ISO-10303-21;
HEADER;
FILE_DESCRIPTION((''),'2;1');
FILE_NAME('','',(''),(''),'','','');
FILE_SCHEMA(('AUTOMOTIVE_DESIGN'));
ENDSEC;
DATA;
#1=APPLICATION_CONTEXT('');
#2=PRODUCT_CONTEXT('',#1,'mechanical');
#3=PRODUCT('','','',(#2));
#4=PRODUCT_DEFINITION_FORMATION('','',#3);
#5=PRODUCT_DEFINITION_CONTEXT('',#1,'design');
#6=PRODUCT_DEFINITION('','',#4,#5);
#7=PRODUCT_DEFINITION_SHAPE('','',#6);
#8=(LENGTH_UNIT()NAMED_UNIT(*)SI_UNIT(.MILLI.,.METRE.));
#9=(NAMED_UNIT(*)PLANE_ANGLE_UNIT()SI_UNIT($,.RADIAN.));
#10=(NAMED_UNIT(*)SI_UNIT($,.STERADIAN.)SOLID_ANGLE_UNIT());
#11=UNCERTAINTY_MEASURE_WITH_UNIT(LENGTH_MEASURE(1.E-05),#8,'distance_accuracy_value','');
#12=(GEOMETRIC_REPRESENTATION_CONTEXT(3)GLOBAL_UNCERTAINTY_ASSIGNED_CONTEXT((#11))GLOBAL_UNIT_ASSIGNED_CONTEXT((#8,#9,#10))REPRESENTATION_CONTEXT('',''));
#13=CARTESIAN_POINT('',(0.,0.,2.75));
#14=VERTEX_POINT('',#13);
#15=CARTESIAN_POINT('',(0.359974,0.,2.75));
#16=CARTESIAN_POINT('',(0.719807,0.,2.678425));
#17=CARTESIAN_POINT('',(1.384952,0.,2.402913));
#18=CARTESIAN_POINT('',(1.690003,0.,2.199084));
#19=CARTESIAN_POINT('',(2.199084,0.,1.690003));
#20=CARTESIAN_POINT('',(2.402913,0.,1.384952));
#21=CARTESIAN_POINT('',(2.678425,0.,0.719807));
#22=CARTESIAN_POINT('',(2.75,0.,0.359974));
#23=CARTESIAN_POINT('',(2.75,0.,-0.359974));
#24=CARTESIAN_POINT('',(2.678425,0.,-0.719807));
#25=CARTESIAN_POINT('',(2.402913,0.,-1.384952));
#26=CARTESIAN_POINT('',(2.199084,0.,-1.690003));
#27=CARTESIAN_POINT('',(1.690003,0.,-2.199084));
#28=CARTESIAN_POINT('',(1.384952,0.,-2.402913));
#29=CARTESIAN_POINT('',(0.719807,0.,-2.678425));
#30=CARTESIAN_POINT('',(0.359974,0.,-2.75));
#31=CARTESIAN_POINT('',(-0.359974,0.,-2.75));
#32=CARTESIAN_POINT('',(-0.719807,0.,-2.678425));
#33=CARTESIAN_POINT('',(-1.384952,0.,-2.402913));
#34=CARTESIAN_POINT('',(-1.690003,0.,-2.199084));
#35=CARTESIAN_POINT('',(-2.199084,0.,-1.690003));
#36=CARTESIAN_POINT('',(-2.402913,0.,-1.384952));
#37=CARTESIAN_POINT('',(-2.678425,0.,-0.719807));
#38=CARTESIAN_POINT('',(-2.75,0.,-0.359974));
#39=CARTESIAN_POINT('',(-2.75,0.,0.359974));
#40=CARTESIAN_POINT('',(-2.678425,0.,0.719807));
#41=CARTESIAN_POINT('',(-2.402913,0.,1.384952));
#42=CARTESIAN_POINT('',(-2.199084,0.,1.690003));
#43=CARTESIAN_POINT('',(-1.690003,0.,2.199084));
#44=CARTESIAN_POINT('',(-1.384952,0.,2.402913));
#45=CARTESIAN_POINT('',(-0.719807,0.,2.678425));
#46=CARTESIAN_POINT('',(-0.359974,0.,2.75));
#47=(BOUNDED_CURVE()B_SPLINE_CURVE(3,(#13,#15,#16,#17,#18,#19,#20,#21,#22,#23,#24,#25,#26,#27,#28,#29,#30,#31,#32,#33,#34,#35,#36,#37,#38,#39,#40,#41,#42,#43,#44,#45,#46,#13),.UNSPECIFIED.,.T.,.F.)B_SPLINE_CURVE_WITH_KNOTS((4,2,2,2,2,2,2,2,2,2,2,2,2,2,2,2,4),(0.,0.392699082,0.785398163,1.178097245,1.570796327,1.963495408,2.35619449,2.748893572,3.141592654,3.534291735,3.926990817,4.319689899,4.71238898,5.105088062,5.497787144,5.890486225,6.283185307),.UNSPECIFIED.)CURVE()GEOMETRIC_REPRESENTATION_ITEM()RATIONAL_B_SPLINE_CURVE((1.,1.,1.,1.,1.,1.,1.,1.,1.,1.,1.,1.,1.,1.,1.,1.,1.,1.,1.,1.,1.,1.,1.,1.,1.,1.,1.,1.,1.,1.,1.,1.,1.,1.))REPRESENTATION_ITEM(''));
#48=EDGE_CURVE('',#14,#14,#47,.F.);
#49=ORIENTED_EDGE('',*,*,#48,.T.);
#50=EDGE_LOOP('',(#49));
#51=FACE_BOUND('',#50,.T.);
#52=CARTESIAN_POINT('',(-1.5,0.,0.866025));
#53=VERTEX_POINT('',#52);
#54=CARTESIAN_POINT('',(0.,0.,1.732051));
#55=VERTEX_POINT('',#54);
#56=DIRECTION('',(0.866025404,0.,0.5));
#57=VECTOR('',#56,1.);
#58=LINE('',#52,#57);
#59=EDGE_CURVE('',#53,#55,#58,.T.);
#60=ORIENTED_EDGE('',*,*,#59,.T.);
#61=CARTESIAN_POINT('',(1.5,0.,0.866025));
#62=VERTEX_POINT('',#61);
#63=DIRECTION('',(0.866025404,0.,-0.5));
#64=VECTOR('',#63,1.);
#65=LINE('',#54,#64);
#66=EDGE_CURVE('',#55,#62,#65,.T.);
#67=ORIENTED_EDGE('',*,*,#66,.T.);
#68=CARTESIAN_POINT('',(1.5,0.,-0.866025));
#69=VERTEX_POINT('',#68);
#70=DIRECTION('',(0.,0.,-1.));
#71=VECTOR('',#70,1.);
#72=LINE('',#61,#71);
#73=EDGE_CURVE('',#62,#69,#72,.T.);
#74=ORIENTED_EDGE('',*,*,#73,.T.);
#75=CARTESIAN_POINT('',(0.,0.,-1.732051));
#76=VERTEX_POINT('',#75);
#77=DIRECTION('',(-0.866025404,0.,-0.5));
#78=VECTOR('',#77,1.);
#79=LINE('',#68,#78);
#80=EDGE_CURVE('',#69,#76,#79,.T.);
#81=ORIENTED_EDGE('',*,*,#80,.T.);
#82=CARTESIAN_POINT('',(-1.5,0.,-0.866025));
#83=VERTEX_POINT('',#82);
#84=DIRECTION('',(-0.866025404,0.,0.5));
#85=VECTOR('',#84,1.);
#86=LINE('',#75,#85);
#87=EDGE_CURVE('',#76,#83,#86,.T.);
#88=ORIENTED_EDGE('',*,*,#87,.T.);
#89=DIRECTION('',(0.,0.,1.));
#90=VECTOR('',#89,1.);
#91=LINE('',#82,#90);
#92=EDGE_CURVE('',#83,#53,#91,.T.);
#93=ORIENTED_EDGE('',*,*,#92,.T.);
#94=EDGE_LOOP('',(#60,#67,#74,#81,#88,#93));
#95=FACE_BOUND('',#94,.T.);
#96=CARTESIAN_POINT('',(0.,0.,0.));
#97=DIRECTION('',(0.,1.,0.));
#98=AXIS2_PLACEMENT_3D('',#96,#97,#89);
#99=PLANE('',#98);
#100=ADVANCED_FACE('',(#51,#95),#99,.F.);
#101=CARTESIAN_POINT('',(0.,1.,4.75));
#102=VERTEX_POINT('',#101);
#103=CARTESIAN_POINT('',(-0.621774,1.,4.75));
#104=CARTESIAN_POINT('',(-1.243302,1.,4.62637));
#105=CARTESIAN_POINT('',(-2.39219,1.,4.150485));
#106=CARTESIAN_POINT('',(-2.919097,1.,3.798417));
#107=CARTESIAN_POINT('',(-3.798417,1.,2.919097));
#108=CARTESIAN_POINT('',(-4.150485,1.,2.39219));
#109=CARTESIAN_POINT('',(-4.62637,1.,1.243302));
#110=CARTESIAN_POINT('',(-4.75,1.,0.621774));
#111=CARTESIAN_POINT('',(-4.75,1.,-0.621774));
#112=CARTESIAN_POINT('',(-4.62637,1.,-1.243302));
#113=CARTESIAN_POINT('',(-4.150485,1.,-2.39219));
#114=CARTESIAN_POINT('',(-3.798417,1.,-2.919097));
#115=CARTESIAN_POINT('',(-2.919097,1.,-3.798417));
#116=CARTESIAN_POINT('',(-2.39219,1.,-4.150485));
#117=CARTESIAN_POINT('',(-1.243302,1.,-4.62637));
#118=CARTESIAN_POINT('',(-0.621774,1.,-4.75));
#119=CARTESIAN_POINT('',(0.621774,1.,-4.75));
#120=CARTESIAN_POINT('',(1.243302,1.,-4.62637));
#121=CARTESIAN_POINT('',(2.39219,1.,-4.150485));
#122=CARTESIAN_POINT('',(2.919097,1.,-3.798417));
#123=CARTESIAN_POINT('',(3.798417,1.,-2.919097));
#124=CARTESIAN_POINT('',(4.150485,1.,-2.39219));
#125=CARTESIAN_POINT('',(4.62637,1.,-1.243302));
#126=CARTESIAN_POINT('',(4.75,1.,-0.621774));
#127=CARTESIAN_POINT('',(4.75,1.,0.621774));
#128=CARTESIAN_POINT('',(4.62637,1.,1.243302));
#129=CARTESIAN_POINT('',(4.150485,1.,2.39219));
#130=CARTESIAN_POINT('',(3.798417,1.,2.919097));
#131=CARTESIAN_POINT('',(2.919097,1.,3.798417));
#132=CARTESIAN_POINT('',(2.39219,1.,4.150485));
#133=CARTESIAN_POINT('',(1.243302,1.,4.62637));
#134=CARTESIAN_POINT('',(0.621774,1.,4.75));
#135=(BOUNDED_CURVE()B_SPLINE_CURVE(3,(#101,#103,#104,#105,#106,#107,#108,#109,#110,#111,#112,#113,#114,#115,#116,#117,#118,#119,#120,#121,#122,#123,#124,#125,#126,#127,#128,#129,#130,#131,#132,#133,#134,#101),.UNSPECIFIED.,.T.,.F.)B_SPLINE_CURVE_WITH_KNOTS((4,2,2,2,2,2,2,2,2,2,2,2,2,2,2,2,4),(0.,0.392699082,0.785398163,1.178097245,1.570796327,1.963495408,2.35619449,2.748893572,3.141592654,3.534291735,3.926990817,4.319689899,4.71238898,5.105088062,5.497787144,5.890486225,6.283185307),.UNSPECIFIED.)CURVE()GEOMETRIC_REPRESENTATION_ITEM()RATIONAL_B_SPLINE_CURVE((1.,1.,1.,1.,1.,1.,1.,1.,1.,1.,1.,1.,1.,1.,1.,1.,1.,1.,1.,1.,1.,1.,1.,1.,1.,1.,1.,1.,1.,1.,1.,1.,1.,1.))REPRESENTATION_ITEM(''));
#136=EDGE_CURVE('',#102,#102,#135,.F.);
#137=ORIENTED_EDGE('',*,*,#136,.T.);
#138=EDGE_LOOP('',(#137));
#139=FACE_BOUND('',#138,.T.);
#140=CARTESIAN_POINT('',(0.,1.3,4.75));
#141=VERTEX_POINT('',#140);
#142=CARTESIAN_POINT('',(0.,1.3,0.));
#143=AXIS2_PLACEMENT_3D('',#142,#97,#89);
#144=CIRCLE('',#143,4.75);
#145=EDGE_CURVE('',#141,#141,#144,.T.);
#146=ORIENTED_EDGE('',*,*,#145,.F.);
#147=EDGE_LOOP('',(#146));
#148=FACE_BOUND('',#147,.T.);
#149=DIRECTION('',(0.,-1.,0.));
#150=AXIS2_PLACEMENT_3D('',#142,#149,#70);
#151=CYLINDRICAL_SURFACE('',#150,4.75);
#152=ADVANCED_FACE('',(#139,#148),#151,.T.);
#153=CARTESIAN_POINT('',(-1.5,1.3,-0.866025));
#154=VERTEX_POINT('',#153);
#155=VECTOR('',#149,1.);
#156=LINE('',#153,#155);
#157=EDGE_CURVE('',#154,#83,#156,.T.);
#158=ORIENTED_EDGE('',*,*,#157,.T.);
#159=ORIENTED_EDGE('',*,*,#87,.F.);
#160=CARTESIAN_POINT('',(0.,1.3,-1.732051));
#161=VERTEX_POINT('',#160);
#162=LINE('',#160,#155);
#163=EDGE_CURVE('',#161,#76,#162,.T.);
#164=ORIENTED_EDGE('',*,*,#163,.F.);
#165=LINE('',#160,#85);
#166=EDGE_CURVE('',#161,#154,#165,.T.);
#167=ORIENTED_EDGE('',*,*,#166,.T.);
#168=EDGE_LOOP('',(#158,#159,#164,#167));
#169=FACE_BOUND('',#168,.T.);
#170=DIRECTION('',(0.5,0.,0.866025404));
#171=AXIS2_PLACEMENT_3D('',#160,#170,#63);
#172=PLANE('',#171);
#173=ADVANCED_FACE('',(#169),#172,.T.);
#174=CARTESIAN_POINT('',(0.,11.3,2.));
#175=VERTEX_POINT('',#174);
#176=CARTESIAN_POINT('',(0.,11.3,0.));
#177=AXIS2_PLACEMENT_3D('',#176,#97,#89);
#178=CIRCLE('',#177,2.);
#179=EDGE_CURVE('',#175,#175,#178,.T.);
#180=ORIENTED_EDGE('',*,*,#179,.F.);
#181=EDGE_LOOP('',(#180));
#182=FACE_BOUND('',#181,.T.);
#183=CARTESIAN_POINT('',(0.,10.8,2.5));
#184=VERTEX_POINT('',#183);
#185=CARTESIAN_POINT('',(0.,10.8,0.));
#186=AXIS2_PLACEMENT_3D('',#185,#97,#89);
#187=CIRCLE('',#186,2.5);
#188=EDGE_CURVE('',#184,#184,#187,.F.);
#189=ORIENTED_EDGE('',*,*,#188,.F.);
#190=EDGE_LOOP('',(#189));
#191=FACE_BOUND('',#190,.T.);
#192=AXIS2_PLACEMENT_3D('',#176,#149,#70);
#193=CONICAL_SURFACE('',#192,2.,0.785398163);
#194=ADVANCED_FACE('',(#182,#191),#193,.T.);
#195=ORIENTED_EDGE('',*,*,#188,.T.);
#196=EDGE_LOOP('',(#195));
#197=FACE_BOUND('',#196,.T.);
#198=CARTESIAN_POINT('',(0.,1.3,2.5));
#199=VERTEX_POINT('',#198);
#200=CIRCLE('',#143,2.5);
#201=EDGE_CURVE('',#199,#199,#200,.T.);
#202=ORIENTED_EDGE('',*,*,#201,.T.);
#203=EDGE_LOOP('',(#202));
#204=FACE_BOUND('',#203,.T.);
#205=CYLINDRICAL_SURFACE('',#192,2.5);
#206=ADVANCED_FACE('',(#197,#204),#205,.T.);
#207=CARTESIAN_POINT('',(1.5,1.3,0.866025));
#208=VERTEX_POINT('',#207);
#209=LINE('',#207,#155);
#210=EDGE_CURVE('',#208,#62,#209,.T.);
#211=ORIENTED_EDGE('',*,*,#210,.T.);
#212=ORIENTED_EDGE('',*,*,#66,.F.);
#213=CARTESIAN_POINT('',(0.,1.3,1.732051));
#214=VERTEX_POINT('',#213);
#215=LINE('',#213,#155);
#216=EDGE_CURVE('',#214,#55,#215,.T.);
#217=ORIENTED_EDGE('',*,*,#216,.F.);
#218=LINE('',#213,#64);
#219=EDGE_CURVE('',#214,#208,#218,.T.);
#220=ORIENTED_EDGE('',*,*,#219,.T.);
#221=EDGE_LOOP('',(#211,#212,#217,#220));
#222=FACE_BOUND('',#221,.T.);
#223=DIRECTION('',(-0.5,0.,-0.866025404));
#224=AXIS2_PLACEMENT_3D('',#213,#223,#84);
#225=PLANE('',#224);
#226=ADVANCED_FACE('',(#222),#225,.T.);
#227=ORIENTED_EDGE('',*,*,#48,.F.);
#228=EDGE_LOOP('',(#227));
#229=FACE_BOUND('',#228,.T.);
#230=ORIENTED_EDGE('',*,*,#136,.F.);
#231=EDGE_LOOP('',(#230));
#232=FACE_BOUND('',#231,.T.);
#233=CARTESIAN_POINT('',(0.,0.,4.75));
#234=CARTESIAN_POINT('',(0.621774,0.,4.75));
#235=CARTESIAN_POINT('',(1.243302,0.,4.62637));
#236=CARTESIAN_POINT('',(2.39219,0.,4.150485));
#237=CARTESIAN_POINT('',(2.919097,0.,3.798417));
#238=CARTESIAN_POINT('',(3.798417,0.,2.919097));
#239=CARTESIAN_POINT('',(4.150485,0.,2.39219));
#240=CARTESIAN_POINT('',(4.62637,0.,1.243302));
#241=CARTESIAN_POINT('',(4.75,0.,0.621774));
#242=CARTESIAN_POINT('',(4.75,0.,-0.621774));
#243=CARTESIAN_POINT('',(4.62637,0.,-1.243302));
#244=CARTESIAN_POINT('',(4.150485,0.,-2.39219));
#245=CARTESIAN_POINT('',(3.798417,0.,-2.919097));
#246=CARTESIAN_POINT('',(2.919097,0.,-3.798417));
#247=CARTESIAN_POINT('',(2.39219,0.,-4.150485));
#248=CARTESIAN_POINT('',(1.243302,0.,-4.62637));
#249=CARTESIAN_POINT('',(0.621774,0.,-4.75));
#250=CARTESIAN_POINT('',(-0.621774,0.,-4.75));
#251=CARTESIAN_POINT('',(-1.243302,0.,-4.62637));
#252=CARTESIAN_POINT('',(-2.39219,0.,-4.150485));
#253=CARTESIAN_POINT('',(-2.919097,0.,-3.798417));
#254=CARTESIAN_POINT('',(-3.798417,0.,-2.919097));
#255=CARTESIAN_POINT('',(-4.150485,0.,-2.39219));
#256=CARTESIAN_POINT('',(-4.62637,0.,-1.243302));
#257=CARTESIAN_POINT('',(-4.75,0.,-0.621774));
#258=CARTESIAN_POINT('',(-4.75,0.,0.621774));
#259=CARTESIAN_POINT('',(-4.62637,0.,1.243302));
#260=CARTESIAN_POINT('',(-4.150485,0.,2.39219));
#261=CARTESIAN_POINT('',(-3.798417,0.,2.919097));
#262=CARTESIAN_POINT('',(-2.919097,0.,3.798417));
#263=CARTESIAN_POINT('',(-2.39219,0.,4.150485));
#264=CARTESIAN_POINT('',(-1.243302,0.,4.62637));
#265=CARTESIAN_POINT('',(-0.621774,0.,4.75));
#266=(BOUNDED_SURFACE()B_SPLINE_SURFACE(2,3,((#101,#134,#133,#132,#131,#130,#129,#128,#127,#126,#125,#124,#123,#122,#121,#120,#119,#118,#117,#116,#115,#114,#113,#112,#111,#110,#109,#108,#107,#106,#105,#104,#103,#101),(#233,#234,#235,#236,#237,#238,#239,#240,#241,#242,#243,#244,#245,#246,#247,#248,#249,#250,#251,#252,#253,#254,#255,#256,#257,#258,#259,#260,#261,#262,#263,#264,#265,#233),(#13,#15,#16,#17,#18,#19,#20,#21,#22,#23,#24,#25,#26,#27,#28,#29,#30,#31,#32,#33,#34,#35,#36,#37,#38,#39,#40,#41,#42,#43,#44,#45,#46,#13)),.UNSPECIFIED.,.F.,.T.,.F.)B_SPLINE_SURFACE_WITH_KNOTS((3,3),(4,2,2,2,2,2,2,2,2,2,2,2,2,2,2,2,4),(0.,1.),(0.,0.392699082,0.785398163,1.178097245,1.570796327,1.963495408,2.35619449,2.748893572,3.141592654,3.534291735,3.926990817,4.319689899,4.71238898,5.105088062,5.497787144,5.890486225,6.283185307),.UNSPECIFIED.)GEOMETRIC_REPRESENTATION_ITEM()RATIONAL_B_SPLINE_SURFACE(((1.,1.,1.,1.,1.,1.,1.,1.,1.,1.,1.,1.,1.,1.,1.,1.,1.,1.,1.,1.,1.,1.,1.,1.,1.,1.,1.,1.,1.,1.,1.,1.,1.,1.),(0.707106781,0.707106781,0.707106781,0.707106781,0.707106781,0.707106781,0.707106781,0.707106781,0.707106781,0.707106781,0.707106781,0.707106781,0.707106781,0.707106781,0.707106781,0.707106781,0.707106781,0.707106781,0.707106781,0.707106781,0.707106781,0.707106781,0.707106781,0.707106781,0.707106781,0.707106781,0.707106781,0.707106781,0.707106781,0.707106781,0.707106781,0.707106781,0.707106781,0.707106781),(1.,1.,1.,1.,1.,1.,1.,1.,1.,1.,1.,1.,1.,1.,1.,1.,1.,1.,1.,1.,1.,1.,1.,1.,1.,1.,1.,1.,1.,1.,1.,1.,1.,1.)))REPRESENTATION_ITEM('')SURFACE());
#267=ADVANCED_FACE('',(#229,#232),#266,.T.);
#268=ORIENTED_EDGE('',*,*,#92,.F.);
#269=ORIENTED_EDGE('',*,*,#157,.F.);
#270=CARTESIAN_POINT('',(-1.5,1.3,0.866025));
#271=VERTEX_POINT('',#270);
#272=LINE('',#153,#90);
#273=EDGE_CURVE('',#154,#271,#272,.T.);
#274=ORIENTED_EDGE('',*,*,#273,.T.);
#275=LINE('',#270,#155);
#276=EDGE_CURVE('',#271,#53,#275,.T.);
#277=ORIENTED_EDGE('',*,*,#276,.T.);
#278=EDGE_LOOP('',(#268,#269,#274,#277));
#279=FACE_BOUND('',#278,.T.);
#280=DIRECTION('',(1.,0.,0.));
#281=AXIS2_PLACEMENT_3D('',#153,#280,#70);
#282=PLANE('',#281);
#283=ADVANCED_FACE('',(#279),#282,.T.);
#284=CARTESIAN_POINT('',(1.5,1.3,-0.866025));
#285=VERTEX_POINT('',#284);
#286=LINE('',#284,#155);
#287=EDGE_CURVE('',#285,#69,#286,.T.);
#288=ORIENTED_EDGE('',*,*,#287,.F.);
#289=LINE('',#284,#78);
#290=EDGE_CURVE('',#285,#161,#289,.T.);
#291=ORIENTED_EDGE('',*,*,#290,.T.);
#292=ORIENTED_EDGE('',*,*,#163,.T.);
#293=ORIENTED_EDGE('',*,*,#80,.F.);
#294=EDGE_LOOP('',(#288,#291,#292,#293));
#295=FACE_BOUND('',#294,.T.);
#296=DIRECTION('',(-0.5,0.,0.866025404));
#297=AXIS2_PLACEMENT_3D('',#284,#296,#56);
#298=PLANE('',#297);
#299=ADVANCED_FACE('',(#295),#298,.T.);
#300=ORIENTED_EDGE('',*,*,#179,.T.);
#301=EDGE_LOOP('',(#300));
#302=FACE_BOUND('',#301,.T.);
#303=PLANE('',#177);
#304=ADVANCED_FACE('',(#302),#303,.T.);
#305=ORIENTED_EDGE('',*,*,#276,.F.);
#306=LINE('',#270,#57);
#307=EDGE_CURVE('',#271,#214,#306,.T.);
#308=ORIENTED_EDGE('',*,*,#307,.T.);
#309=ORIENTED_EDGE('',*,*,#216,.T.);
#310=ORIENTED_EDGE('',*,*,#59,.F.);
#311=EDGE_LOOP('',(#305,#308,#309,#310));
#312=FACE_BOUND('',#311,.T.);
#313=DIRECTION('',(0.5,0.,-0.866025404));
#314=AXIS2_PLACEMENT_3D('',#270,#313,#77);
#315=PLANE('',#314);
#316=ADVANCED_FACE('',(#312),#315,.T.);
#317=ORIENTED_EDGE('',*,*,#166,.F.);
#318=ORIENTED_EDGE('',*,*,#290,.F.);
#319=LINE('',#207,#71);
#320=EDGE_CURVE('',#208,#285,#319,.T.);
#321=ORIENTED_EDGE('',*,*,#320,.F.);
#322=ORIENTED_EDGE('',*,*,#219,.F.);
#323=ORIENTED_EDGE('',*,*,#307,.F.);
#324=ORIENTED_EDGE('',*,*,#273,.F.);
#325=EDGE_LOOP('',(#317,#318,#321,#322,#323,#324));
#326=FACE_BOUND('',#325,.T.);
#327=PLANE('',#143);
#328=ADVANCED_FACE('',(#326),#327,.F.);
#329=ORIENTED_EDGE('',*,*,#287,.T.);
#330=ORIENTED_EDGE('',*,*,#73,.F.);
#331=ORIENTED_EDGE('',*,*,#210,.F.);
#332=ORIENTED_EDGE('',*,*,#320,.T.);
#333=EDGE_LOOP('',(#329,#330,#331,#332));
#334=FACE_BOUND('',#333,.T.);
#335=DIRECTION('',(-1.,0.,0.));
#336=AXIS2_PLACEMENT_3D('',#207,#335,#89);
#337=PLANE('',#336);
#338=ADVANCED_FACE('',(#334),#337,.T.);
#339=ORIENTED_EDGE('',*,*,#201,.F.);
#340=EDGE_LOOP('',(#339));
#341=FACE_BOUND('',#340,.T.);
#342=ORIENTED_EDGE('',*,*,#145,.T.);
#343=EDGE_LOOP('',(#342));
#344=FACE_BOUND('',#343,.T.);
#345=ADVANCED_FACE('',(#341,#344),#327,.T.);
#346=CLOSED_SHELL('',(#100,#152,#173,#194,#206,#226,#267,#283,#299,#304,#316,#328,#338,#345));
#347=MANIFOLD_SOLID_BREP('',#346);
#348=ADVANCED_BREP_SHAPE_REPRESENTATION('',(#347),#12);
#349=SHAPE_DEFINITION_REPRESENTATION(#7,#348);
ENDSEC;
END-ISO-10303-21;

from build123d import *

# Parameters (mm, degrees)
SKETCH_1_R      = 4.75
EXTRUDE_1_DEPTH = 1.3
SKETCH_2_R      = 2.5
EXTRUDE_2_DEPTH = 10
CHAMFER_1_SIZE  = 0.5
FILLET_1_SIZE   = 1
FILLET_1_SIZE_2 = 2


with BuildPart() as part:
    # 草图1 → 凸台-拉伸1 (new body)
    with BuildSketch(Plane(origin=(0, 0, 0), x_dir=(1, 0, 0), z_dir=(0, 1, 0))):
        with Locations(Location((0, 0, 0), (0, 0, 270))):
            Circle(SKETCH_1_R)
        Polygon((0, -1.732050808), (1.5, -0.866025404), (1.5, 0.866025404), (0, 1.732050808), (-1.5, 0.866025404), (-1.5, -0.866025404), align=None, mode=Mode.SUBTRACT)
    extrude(amount=EXTRUDE_1_DEPTH)

    # 草图2 → 凸台-拉伸2 (add)
    with BuildSketch(Plane(origin=(0, 1.3, 0), x_dir=(1, 0, 0), z_dir=(0, 1, 0))):
        with Locations(Location((0, 0, 0), (0, 0, 270))):
            Circle(SKETCH_2_R)
    extrude(amount=EXTRUDE_2_DEPTH)

    # 倒角1
    chamfer_1_edges = [part.edges().sort_by_distance(p)[0] for p in [
        (0, 11.3, -2.5),
    ]]
    chamfer(chamfer_1_edges, length=CHAMFER_1_SIZE)

    # 圆角1
    # an asymmetric fillet: 2, 1 mm, written as the material it takes off along each edge
    with BuildSketch(Plane(origin=(0, 0, 0), x_dir=(0, 0, 1), z_dir=(-1, 0, 0))) as fillet_1_piece_1:
        with BuildLine():
            Bezier((4.75, FILLET_1_SIZE), (4.75, 0), (4.75 - FILLET_1_SIZE_2, 0), weights=[1, 0.707106781, 1])
            Line((4.75 - FILLET_1_SIZE_2, 0), (4.75, 0))
            Line((4.75, 0), (4.75, FILLET_1_SIZE))
        make_face()
    revolve(axis=Axis((0, 0, 0), (0, 1, 0)), mode=Mode.SUBTRACT)


solid = part.part
